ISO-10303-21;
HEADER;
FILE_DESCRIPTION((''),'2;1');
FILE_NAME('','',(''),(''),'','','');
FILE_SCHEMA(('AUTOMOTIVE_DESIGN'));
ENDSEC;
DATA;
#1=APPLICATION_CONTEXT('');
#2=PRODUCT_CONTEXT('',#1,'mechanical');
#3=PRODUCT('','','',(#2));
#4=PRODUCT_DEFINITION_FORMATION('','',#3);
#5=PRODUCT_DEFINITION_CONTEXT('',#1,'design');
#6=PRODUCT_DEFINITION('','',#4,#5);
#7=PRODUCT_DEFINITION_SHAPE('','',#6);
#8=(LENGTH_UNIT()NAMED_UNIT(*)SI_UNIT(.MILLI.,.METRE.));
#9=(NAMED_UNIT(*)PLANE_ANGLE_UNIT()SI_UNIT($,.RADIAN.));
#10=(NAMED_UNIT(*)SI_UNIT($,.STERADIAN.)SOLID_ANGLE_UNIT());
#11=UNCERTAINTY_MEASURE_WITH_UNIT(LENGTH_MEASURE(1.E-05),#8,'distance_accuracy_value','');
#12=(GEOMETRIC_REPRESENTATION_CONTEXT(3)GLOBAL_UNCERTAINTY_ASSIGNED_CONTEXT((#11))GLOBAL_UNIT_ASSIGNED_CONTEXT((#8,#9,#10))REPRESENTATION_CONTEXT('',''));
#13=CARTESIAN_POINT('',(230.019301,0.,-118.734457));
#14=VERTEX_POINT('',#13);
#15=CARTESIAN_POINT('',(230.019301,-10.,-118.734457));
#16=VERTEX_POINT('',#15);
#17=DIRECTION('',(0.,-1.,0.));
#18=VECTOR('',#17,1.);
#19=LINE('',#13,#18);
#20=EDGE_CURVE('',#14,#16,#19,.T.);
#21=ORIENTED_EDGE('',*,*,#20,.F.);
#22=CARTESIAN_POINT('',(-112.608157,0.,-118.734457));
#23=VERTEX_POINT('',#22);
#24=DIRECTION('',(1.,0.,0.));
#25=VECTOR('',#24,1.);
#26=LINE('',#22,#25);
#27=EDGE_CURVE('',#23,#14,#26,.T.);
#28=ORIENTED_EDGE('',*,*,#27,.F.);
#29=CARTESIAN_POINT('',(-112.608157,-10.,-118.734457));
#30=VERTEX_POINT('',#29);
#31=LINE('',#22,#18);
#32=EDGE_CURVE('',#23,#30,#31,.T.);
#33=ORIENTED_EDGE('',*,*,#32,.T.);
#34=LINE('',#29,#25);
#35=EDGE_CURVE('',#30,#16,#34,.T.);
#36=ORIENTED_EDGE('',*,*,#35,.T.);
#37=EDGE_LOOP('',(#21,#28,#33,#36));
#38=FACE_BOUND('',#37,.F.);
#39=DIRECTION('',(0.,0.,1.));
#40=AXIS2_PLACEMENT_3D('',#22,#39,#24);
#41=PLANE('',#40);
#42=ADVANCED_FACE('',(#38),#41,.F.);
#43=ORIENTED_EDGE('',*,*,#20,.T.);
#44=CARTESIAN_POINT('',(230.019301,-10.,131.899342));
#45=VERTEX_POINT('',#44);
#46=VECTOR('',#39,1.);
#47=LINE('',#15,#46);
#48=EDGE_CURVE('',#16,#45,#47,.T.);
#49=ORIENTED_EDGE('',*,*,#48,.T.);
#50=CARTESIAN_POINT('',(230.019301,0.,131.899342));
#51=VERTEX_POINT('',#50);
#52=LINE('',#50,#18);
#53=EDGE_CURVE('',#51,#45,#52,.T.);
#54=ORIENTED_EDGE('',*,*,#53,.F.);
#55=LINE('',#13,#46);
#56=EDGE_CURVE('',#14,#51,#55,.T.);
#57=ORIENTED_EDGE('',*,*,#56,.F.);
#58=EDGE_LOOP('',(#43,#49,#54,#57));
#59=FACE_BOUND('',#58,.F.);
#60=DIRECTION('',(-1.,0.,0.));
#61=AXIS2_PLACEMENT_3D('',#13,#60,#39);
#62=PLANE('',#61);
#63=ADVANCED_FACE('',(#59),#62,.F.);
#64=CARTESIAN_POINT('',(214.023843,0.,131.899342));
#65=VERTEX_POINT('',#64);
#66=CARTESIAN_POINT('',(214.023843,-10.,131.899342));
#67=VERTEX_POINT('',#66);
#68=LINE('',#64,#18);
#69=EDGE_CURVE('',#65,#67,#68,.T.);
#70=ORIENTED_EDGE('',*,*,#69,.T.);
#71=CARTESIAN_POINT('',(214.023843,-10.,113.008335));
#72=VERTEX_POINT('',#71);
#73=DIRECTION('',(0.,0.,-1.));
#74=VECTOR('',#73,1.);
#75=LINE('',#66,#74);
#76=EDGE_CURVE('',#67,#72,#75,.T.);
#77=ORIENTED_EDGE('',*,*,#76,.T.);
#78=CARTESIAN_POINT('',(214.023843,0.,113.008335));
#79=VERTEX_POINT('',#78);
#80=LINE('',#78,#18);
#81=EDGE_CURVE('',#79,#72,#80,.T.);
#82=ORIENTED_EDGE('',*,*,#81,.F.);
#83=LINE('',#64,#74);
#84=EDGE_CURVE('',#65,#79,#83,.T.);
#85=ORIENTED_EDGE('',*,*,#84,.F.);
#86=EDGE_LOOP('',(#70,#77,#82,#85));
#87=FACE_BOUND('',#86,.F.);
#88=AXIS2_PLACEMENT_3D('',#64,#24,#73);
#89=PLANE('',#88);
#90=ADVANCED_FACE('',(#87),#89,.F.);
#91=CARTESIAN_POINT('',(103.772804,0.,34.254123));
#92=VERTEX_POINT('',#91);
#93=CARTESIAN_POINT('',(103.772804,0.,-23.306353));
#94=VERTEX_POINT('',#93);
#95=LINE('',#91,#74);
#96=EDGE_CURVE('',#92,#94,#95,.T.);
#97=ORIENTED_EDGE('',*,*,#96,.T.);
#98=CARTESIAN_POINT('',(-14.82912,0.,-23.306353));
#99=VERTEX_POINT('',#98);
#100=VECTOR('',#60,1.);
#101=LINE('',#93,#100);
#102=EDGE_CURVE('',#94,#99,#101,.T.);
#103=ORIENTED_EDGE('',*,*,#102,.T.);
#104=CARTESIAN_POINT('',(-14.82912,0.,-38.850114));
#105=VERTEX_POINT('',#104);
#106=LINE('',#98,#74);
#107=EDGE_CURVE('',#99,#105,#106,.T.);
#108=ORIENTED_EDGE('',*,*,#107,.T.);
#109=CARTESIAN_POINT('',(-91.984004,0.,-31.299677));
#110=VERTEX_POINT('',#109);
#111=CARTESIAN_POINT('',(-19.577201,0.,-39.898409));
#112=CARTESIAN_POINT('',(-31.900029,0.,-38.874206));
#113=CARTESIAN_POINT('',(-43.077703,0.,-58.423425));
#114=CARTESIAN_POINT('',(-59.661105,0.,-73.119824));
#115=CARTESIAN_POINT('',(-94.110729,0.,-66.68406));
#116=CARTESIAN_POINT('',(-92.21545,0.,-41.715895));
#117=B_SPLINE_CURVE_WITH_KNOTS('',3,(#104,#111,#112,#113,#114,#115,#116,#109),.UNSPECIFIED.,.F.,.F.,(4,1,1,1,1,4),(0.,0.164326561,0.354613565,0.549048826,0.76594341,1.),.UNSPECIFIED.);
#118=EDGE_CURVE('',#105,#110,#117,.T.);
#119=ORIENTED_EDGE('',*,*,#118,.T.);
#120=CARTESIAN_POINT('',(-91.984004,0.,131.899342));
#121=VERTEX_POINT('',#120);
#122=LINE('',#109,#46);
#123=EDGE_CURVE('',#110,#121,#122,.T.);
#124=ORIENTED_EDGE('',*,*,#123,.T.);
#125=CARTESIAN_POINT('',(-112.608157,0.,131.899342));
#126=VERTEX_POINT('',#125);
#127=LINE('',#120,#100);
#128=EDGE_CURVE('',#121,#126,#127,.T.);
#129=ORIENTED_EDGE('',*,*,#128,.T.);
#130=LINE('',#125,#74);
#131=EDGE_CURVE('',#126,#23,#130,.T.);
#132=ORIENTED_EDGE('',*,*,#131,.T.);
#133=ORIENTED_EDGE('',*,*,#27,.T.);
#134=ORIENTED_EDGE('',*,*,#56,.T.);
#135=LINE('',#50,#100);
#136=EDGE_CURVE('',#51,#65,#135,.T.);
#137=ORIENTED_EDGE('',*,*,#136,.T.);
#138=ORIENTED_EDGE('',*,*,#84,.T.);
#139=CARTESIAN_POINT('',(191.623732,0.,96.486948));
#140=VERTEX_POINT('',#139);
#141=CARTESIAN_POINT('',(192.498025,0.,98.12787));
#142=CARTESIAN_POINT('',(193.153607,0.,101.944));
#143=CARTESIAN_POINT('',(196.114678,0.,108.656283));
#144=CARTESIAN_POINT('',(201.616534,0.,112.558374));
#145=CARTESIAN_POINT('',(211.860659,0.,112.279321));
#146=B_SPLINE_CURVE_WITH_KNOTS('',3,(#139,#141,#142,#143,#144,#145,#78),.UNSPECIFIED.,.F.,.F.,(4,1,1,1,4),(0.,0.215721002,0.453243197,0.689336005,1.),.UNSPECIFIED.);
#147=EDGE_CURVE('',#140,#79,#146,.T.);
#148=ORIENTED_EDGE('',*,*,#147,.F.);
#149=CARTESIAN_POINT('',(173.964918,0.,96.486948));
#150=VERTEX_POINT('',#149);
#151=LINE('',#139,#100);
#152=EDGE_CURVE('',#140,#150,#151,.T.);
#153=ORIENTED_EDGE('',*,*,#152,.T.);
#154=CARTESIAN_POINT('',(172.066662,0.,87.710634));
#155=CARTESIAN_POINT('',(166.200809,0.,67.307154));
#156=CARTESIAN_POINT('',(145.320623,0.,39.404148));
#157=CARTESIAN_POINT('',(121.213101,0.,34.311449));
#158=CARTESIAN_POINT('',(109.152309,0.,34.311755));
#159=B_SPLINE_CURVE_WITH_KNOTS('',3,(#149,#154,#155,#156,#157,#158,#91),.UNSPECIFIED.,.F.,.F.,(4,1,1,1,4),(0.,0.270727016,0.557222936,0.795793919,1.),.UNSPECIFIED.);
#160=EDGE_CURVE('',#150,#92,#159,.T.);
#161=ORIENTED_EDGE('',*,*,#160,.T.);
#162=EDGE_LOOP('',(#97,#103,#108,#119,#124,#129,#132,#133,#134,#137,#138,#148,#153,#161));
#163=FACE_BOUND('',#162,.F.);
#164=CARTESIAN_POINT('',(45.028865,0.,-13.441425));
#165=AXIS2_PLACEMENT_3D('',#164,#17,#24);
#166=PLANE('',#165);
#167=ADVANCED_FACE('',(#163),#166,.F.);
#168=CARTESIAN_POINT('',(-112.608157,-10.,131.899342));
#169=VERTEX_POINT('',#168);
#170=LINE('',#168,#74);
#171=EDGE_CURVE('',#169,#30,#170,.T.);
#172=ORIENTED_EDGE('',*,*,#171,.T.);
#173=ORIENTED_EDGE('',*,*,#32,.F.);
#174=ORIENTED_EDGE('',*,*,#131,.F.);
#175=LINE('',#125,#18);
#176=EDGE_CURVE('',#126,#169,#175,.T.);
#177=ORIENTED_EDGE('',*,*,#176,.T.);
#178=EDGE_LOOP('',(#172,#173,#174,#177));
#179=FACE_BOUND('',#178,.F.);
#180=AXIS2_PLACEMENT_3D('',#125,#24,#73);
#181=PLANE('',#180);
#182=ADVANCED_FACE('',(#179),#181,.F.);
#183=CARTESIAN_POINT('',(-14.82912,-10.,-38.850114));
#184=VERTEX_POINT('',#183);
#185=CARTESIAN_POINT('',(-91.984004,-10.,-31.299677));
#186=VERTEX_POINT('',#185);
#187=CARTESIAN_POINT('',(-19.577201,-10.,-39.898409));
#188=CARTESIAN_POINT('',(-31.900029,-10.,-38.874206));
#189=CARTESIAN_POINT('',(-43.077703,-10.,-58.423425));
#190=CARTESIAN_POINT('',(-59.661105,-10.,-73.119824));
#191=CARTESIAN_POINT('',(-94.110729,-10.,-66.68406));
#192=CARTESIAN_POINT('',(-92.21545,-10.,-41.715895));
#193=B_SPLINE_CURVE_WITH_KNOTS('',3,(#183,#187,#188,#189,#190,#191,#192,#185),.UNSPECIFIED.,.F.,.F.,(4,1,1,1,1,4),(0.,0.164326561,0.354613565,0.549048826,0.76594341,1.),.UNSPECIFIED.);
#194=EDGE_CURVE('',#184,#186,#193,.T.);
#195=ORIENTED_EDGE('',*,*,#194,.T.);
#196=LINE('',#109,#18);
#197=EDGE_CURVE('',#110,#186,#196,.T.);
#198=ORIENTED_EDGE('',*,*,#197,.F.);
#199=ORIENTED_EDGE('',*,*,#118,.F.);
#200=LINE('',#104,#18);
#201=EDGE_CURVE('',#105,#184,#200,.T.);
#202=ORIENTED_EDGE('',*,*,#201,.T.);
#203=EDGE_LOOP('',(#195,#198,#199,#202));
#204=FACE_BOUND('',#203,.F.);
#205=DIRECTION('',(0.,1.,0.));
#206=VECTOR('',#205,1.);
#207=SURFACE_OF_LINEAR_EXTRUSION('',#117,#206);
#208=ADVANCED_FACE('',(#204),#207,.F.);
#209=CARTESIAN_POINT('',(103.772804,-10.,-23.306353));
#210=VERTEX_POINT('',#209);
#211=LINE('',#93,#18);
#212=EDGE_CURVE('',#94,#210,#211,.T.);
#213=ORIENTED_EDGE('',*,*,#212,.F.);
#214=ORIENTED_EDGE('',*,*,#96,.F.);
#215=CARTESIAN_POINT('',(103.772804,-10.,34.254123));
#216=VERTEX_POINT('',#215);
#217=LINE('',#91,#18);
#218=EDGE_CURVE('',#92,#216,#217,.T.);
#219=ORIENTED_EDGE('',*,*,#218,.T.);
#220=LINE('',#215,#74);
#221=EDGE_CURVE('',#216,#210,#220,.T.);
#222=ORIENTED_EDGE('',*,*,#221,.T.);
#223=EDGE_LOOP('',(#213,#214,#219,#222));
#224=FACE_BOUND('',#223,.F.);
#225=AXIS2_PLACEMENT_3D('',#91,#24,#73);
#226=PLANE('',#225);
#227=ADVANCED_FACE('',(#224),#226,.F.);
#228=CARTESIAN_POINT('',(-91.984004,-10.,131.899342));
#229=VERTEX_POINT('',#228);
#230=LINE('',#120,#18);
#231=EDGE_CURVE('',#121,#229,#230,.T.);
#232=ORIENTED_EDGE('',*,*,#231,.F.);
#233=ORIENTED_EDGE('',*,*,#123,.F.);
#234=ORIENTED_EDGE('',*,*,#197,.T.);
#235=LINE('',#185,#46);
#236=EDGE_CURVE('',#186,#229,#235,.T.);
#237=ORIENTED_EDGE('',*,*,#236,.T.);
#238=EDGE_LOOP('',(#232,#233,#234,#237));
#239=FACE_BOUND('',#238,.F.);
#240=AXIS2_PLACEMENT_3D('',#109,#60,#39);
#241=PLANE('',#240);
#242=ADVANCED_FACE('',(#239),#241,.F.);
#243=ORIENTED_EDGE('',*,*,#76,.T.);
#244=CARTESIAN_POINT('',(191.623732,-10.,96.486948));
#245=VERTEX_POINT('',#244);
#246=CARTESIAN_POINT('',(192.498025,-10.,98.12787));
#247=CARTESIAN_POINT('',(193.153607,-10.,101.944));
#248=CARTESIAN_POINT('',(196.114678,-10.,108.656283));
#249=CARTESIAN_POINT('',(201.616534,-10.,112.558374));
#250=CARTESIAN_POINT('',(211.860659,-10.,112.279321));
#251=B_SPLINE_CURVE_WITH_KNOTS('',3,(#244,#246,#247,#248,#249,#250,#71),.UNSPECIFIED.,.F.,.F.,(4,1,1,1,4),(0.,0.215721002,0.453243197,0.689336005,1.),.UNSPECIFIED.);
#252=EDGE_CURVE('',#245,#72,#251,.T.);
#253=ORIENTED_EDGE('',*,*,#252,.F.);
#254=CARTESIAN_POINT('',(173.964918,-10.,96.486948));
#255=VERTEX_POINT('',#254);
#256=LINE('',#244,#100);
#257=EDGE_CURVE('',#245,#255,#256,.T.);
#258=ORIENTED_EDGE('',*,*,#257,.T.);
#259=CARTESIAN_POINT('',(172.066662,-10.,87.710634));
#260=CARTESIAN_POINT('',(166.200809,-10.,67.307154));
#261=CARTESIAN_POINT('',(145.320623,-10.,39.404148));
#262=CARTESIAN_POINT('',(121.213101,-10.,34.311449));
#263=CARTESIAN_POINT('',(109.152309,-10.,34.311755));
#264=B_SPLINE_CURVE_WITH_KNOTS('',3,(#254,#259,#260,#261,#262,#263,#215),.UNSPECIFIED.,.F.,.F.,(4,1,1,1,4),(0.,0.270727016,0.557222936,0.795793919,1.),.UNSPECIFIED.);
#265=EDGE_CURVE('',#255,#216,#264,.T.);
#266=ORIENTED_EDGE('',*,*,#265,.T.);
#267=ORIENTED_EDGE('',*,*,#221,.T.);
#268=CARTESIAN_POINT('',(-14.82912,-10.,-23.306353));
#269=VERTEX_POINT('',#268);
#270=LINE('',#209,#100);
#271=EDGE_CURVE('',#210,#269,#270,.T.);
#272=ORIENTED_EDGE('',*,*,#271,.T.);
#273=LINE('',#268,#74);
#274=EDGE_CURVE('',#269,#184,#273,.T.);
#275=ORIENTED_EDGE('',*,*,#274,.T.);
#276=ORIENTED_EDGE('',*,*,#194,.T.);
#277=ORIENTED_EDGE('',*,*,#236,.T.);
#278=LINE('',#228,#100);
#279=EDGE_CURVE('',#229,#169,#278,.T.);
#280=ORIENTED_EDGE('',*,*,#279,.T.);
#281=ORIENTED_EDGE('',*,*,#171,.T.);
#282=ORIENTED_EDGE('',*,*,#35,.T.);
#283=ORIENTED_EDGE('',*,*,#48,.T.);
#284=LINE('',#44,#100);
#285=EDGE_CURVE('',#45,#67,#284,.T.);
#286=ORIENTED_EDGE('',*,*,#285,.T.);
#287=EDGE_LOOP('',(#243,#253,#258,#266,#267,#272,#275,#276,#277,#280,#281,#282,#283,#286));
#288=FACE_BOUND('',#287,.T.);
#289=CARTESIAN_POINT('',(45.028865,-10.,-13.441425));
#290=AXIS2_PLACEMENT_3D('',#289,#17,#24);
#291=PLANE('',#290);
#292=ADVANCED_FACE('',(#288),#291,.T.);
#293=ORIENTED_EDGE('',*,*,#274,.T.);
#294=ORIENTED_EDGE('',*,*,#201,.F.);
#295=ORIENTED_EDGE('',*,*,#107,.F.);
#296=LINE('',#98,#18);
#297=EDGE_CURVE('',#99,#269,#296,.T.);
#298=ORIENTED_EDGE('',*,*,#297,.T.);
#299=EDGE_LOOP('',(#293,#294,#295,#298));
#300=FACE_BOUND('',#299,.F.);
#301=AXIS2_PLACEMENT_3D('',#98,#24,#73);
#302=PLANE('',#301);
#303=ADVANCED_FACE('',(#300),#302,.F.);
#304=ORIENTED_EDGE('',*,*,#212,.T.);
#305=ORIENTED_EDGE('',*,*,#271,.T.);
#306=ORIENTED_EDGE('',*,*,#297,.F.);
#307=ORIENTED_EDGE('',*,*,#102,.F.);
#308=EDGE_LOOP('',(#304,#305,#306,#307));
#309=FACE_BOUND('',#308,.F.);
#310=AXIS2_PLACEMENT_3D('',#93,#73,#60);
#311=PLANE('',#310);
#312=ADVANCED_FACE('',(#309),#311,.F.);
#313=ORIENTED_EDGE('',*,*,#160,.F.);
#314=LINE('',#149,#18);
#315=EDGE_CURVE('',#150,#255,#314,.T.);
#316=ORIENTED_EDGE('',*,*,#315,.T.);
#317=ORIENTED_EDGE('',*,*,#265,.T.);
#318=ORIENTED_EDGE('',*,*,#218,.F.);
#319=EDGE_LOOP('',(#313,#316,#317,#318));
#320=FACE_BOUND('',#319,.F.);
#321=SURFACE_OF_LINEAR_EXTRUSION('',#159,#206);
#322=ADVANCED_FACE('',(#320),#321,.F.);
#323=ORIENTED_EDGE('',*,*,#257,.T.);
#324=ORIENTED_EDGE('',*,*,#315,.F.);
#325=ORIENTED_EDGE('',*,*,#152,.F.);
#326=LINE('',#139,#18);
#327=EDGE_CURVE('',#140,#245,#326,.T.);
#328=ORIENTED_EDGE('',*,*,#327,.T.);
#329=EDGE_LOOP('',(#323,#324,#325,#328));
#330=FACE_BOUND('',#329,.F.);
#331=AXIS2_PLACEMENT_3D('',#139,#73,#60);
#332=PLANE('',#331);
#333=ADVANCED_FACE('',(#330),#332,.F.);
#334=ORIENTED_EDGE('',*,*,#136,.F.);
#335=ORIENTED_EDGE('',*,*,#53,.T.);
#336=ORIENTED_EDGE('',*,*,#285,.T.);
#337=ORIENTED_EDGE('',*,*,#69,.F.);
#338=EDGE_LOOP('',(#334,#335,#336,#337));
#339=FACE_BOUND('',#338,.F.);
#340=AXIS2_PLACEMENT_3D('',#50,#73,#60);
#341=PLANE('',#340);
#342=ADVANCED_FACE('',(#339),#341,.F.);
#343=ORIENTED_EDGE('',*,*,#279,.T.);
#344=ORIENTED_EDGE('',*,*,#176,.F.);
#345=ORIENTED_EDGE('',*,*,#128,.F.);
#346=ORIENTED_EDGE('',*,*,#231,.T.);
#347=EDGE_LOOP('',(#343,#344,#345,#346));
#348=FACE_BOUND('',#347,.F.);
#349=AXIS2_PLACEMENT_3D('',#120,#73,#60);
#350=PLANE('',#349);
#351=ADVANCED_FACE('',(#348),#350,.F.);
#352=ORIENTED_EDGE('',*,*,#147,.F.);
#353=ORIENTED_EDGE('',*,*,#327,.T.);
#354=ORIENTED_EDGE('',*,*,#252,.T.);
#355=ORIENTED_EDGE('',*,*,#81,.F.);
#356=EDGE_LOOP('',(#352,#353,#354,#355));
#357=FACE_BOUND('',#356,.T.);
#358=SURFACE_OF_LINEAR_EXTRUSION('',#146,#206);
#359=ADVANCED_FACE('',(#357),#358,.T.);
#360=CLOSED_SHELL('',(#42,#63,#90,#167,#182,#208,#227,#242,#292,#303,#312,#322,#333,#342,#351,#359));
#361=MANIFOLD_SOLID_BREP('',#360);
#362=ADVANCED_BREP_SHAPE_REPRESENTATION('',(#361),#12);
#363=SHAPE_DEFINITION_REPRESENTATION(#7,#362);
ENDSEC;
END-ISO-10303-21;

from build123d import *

# Parameters (mm, degrees)
F2_DEPTH = 10


with BuildPart() as f2:
    # F1 (on face) → F2 (new body)
    with BuildSketch(Plane.XZ):
        with BuildLine():
            Line((-91.9840037823, -31.2996767461), (-91.9840037823, 131.8993419409))
            Line((-91.9840037823, 131.8993419409), (-112.6081570983, 131.8993419409))
            Line((-112.6081570983, 131.8993419409), (-112.6081570983, -118.7344565988))
            Line((-112.6081570983, -118.7344565988), (230.0193011761, -118.7344565988))
            Line((230.0193011761, -118.7344565988), (230.0193011761, 131.8993419409))
            Line((230.0193011761, 131.8993419409), (214.0238434076, 131.8993419409))
            Line((214.0238434076, 131.8993419409), (214.0238434076, 113.0083352327))
            add(Edge.make_bspline(
                [(191.6237324476, 96.4869484305), (192.4980250224, 98.1278702864), (193.1536069546, 101.9439997116), (196.1146778047, 108.6562828707), (201.6165341433, 112.5583739062), (211.8606585251, 112.2793213926), (214.0238434076, 113.0083352327)],
                knots=[0, 0, 0, 0, 0.2157210018, 0.4532431975, 0.6893360054, 1, 1, 1, 1], degree=3))
            Line((191.6237324476, 96.4869484305), (173.9649176598, 96.4869484305))
            add(Edge.make_bspline(
                [(173.9649176598, 96.4869484305), (172.0666621983, 87.7106344295), (166.200808661, 67.3071544762), (145.3206230123, 39.4041475495), (121.2131008193, 34.3114486831), (109.1523088398, 34.3117546192), (103.772804141, 34.2541225255)],
                knots=[0, 0, 0, 0, 0.2707270162, 0.5572229358, 0.7957939194, 1, 1, 1, 1], degree=3))
            Line((103.772804141, 34.2541225255), (103.772804141, -23.3063530177))
            Line((103.772804141, -23.3063530177), (-14.8291196674, -23.3063530177))
            Line((-14.8291196674, -23.3063530177), (-14.8291196674, -38.8501137495))
            add(Edge.make_bspline(
                [(-14.8291196674, -38.8501137495), (-19.5772007963, -39.8984086665), (-31.9000289258, -38.8742055052), (-43.0777025398, -58.4234253449), (-59.6611048278, -73.1198238571), (-94.1107291621, -66.6840596527), (-92.2154498937, -41.7158947129), (-91.9840037823, -31.2996767461)],
                knots=[0, 0, 0, 0, 0.1643265607, 0.3546135647, 0.5490488256, 0.7659434096, 1, 1, 1, 1], degree=3))
        make_face()
    extrude(amount=F2_DEPTH)


solid = f2.part
